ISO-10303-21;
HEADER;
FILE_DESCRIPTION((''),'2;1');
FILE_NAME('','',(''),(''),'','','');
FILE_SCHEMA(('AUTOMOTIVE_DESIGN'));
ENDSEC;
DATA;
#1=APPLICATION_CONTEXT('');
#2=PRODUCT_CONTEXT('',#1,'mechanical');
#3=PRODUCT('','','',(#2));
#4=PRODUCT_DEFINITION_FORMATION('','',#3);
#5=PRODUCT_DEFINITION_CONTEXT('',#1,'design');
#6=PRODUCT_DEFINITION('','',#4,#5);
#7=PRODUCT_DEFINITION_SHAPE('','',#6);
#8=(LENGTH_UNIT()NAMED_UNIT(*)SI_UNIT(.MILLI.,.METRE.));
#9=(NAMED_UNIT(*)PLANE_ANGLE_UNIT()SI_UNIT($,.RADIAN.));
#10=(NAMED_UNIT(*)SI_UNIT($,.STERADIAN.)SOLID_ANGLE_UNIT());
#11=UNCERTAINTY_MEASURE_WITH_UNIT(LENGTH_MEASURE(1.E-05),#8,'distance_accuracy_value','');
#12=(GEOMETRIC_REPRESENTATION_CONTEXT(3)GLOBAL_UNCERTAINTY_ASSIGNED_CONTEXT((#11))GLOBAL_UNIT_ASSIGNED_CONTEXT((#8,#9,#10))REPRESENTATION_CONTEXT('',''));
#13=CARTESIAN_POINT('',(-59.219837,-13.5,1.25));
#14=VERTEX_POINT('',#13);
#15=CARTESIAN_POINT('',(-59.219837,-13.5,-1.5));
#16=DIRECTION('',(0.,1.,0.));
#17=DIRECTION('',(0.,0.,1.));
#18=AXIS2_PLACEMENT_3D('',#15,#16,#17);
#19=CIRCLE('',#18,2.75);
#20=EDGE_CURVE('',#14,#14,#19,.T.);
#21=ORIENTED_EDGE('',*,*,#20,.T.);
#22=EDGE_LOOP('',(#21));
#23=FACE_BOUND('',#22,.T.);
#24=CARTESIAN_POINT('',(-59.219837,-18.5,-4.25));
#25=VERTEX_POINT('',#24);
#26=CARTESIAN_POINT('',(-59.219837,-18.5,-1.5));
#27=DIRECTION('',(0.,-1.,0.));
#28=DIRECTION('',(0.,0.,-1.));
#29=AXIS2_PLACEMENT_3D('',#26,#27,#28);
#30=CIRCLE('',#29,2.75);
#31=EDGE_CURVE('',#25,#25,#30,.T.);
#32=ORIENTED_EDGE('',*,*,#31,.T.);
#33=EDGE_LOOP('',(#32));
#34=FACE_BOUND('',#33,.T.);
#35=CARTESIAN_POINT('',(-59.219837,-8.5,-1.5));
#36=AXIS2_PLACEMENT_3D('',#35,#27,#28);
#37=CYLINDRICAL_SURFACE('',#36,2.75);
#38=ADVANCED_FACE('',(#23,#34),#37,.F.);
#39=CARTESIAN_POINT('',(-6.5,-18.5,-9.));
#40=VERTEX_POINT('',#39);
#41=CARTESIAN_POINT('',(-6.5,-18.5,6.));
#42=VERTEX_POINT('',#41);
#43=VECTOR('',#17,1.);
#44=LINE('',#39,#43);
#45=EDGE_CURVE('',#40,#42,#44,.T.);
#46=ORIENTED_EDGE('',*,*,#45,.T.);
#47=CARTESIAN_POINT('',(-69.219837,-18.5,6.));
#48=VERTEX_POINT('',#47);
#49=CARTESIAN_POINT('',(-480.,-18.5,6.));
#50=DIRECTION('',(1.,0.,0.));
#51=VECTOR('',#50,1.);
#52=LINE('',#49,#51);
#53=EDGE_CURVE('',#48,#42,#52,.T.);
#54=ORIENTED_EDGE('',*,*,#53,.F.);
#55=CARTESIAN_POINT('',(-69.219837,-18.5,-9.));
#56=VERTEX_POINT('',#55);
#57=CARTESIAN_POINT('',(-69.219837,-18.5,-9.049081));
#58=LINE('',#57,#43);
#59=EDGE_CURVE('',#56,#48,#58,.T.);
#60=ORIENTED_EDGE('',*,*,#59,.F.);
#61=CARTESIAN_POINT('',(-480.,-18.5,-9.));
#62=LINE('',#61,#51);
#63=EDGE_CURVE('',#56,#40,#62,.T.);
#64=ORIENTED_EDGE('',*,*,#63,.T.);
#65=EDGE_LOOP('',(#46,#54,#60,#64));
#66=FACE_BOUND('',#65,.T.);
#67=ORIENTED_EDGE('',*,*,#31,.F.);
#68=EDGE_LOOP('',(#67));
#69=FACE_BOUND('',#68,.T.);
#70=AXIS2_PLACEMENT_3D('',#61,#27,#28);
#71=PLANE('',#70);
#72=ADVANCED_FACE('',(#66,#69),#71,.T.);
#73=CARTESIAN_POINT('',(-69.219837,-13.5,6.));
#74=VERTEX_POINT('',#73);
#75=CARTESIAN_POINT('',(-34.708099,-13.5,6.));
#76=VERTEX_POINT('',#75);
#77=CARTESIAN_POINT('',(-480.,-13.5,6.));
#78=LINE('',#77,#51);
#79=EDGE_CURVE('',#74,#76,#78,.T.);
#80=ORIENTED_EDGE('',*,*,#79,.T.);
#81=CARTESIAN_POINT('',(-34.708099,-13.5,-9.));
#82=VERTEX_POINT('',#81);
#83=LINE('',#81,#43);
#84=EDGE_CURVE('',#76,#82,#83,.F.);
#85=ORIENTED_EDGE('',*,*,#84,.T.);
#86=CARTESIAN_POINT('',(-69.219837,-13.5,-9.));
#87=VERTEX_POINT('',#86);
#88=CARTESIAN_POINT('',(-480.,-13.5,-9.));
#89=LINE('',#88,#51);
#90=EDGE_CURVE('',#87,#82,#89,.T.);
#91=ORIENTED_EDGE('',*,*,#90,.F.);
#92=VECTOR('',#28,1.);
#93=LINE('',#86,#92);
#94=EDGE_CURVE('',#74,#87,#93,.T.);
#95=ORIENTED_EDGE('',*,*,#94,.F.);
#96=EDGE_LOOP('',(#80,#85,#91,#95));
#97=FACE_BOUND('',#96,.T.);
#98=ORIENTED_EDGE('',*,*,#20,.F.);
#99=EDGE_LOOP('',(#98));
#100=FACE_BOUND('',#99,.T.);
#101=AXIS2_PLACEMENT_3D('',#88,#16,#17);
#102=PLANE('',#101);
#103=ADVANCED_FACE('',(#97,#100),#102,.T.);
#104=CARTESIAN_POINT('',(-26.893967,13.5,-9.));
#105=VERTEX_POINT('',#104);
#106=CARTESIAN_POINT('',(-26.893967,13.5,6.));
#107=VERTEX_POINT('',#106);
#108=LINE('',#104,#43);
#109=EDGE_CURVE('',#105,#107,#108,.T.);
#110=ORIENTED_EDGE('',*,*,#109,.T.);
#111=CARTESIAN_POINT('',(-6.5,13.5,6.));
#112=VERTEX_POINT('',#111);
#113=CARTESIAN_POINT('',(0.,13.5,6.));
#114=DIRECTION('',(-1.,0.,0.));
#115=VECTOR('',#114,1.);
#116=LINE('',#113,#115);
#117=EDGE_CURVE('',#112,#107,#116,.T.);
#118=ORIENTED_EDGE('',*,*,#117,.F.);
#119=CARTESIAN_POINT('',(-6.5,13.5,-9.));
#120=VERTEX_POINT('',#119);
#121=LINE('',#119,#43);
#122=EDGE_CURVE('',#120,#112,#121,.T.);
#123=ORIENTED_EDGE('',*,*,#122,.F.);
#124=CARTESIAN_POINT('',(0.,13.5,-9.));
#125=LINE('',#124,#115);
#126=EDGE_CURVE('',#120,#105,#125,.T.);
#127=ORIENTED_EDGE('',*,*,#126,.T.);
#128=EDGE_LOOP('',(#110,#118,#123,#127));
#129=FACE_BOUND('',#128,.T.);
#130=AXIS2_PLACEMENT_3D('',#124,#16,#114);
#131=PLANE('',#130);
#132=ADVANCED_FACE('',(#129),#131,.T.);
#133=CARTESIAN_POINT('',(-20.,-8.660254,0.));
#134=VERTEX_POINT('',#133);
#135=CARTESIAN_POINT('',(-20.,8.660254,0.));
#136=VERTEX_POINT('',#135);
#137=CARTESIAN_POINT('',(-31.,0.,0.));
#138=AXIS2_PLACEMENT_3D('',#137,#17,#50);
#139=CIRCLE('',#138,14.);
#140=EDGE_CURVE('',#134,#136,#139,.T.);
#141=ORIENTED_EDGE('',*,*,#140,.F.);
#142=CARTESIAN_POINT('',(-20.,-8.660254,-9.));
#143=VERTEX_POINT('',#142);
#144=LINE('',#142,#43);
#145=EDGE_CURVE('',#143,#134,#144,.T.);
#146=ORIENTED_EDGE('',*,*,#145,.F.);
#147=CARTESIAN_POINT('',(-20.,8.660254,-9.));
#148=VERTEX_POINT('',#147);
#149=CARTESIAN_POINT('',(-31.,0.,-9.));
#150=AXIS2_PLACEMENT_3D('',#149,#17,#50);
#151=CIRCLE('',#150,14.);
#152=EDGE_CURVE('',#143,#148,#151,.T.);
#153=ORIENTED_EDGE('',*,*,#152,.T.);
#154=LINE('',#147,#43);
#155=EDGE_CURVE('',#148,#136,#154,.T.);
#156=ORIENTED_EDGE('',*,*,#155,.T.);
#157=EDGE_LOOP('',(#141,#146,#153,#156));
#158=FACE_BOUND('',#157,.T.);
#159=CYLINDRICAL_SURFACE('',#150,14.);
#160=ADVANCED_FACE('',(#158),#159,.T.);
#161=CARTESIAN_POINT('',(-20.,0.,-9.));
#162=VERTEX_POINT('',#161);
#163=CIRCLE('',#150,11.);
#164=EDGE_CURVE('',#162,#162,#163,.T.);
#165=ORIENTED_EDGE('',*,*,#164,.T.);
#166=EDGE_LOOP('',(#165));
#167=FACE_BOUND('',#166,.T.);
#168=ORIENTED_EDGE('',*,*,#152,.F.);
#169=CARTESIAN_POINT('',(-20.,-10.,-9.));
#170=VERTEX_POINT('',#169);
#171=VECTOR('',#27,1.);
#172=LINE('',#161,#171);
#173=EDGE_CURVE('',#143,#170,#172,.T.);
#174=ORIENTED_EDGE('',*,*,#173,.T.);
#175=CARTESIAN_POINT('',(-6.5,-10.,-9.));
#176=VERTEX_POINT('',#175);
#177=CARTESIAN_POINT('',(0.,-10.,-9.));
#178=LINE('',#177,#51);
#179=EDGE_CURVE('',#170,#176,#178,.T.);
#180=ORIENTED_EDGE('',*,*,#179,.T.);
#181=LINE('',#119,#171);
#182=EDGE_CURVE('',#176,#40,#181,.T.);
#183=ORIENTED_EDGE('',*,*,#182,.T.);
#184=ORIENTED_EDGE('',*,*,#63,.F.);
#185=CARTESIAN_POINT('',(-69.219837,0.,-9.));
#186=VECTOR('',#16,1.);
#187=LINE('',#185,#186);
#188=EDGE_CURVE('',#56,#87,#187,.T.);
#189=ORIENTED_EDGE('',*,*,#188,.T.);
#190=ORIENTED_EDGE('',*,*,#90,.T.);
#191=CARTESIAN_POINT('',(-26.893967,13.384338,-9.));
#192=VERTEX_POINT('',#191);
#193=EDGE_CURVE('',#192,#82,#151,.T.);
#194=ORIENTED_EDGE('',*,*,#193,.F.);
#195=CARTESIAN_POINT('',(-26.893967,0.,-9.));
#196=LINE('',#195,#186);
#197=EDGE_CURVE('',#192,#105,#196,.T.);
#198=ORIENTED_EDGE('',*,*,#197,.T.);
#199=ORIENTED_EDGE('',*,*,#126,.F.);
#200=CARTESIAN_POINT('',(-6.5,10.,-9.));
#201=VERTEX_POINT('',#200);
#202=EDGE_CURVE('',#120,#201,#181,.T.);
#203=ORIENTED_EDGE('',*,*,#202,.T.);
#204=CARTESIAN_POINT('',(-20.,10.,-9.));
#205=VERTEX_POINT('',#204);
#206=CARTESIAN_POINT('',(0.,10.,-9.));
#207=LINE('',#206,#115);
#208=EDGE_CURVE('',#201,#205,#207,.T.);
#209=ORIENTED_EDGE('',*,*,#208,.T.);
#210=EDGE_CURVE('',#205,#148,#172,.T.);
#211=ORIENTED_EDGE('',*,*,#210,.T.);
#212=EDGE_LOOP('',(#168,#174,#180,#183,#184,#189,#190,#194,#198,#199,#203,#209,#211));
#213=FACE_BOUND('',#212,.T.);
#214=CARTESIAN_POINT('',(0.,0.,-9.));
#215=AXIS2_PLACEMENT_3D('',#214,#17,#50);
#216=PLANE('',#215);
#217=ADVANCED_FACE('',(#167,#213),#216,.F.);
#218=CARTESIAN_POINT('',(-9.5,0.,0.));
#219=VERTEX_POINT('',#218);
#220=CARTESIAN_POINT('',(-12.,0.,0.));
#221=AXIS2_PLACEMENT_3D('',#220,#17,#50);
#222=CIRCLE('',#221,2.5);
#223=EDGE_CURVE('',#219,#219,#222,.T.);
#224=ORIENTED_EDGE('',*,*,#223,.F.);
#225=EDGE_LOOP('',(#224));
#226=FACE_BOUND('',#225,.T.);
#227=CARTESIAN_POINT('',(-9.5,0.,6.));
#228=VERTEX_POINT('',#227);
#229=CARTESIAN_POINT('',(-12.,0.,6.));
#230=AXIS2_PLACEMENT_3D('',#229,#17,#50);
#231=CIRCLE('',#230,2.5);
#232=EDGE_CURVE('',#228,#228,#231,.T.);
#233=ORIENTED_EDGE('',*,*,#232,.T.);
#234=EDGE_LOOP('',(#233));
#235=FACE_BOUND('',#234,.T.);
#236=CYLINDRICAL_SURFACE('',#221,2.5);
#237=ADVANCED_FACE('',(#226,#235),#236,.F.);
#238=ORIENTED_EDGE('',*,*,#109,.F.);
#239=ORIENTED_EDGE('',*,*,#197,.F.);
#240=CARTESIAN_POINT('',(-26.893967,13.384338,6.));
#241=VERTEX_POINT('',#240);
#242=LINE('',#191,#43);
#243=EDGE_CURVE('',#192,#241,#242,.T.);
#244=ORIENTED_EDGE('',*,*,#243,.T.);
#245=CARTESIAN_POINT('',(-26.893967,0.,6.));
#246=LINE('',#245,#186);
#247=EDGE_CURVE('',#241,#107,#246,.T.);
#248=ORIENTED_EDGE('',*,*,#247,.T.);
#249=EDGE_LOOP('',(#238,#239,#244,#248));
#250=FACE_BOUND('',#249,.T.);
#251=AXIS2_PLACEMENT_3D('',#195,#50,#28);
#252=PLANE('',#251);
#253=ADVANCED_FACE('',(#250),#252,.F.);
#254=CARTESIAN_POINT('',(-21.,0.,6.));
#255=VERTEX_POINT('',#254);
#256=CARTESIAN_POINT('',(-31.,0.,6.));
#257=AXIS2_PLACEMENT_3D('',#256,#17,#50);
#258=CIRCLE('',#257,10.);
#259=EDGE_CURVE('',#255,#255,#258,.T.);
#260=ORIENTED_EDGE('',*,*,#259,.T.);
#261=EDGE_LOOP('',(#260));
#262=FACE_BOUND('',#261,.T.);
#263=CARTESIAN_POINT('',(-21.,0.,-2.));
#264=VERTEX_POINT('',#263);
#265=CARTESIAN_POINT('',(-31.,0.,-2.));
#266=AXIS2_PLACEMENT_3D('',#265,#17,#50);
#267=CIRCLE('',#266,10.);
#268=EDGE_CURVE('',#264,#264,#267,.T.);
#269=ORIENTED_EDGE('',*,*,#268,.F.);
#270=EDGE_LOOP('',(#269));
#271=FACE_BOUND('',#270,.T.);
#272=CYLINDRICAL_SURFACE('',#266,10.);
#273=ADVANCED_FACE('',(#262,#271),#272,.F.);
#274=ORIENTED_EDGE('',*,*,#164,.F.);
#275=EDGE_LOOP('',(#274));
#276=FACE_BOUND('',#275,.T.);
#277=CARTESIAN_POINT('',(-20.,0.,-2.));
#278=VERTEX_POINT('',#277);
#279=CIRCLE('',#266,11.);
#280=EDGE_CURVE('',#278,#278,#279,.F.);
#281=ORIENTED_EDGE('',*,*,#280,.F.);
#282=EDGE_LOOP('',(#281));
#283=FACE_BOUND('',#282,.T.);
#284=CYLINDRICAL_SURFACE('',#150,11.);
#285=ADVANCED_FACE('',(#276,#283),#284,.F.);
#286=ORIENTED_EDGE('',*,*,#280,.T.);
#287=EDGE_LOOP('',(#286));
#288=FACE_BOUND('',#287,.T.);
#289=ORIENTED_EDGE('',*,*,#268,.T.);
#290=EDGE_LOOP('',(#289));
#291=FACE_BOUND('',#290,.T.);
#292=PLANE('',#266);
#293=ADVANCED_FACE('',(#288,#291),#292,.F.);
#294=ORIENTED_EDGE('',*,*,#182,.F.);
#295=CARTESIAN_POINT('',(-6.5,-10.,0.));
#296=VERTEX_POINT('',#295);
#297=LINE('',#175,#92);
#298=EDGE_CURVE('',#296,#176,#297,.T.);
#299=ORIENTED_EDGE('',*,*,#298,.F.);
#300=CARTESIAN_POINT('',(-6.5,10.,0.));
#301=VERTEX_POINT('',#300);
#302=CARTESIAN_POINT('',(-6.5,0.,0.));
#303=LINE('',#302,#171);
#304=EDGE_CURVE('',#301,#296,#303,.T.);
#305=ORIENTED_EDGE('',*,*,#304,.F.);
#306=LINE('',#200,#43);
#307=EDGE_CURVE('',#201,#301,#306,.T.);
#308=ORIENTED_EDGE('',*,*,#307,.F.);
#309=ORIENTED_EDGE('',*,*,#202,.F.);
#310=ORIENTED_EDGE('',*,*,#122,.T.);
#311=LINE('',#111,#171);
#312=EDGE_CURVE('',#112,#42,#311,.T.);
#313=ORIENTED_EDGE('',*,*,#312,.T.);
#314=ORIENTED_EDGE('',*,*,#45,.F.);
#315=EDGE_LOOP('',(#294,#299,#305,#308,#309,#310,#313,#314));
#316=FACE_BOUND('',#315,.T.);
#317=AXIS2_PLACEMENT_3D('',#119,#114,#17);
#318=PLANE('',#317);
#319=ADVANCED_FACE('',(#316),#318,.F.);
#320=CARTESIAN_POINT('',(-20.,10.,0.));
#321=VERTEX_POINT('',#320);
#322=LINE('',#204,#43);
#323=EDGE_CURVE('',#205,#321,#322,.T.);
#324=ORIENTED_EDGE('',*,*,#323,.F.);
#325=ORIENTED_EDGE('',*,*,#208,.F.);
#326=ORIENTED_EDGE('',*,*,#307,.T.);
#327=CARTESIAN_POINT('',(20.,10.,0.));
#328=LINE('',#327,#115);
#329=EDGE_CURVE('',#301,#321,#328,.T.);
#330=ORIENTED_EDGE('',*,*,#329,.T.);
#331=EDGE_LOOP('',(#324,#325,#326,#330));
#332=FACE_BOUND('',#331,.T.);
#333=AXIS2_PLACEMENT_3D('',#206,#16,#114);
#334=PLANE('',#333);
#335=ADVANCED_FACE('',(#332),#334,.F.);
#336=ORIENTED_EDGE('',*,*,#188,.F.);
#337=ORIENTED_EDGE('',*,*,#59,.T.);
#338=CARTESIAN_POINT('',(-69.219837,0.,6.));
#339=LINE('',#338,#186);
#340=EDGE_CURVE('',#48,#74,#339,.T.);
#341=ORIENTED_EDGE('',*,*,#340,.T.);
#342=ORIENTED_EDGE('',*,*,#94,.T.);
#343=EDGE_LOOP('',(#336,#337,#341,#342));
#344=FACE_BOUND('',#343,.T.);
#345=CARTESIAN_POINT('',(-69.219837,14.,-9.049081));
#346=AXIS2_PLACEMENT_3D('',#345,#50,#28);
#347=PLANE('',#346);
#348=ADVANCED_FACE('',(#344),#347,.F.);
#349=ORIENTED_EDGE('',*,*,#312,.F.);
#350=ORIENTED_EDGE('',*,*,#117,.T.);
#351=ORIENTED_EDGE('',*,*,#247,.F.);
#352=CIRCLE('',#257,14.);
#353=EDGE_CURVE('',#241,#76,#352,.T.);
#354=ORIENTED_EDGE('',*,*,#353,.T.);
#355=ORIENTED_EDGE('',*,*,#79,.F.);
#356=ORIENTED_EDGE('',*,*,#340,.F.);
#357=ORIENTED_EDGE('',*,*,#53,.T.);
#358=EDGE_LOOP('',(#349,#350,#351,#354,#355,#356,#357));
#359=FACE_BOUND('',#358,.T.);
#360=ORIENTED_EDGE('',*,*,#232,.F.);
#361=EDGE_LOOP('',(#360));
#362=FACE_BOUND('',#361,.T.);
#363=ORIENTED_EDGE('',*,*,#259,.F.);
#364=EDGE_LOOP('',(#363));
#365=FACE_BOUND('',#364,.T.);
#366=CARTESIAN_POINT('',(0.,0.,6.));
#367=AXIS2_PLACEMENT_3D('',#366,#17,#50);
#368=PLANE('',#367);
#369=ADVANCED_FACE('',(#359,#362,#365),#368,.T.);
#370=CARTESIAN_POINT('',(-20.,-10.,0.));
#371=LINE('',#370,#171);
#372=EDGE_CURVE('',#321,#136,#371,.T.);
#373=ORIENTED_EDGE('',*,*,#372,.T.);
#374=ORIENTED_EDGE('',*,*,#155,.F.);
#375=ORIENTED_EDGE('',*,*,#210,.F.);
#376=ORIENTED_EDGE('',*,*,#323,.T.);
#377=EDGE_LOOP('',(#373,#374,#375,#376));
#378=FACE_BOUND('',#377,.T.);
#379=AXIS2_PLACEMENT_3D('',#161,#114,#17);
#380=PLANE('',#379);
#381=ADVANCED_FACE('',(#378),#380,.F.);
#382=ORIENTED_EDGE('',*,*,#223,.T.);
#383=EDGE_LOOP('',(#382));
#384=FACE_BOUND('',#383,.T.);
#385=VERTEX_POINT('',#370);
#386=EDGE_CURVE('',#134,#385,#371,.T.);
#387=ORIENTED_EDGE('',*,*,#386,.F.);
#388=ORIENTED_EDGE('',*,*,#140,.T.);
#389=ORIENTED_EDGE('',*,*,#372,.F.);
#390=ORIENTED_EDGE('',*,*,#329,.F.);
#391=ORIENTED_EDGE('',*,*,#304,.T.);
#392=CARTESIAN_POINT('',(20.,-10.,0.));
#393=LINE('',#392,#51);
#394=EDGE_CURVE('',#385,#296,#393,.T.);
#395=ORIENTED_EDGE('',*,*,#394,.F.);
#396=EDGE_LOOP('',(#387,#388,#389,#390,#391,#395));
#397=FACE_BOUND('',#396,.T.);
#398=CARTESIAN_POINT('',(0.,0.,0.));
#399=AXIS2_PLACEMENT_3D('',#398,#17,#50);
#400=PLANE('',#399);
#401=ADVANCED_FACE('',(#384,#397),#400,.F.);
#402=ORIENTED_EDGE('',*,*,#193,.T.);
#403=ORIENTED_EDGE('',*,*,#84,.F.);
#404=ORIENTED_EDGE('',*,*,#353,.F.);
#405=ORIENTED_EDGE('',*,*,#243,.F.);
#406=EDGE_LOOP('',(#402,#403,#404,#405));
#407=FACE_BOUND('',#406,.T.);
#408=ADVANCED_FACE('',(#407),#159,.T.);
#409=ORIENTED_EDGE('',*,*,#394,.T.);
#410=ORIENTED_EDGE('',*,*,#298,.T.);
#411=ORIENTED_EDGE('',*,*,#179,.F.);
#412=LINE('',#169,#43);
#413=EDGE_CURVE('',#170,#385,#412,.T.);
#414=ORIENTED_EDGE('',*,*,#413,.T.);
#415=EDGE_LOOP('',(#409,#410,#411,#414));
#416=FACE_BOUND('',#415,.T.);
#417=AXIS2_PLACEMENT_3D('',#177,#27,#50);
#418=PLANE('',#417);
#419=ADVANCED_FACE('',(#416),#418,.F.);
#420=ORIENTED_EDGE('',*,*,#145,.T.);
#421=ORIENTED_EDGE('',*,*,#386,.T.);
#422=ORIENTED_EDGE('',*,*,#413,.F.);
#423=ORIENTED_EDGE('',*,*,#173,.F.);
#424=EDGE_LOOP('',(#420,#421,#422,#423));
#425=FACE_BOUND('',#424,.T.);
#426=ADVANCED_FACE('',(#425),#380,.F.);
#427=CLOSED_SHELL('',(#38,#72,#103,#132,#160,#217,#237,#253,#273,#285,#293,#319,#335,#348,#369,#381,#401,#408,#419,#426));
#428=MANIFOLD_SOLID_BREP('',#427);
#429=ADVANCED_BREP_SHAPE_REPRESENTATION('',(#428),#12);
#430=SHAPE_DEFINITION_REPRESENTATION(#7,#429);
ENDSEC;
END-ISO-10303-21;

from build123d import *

# Parameters (mm, degrees)
SKETCH_1_W          = 40
SKETCH_1_H          = 20
EXTRUDE_1_DEPTH     = 6
SKETCH_2_R          = 2.5
CUT_EXTRUDE_1_DEPTH = 24.151673806
EXTRUDE_START       = -15
EXTRUDE_2_OUTLINE_R = 11
EXTRUDE_2_DEPTH     = 15
EXTRUDE_START_2     = -8
SKETCH_5_R          = 11
SKETCH_5_R_2        = 10
EXTRUDE_3_DEPTH     = 8
SKETCH_10_W         = 15
SKETCH_10_H         = 5
EXTRUDE_4_DEPTH     = 500
SKETCH_11_W         = 11.491200589
SKETCH_11_H         = 5.122583395
EXTRUDE_5_DEPTH     = 15
SKETCH_12_W         = 26.5
SKETCH_12_H         = 32
CUT_EXTRUDE_2_DEPTH = 481.59052217
SKETCH_14_W         = 424.807672393
SKETCH_14_H         = 21.861471412
CUT_EXTRUDE_3_DEPTH = 482.183177179
SKETCH_15_R         = 2.75
CUT_EXTRUDE_4_DEPTH = 10


# Read off the part's stored shape, not the designer's step: 凸台-拉伸2
with BuildPart() as part:
    # 草图1 → 凸台-拉伸1 (new body)
    with BuildSketch(Plane.XY):
        Rectangle(SKETCH_1_W, SKETCH_1_H)
    extrude(amount=EXTRUDE_1_DEPTH)

    # 草图2 → 切除-拉伸1 (cut, through all)
    with BuildSketch(Plane.XY.offset(6)):
        with Locations((10, 0)):
            Circle(SKETCH_2_R)
        with Locations((-1, 0)):
            Circle(SKETCH_2_R)
        with Locations((-12, 0)):
            Circle(SKETCH_2_R)
    extrude(amount=-CUT_EXTRUDE_1_DEPTH, mode=Mode.SUBTRACT)

    # 凸台-拉伸2 outline → 凸台-拉伸2 (add)
    with BuildSketch(Plane.XY.offset(6).offset(EXTRUDE_START)):
        with BuildLine():
            Line((20, 10), (20, 13.5))
            Line((20, 13.5), (-26.893967141, 13.5))
            Line((-26.893967141, 13.5), (-26.893967141, 13.384337644))
            ThreePointArc((-26.893967141, 13.384337644), (-45, 0), (-26.893967141, -13.384337644))
            Line((-26.893967141, -13.384337644), (-26.893967141, -13.5))
            Line((-26.893967141, -13.5), (20, -13.5))
            Line((20, -13.5), (20, -10))
            Line((20, -10), (-20, -10))
            Line((-20, -10), (-20, -8.660254038))
            ThreePointArc((-20, -8.660254038), (-17, 0), (-20, 8.660254038))
            Line((-20, 8.660254038), (-20, 10))
            Line((-20, 10), (20, 10))
        make_face()
        with Locations((-31, 0)):
            Circle(EXTRUDE_2_OUTLINE_R, mode=Mode.SUBTRACT)
    extrude(amount=EXTRUDE_2_DEPTH)

    # 草图5 → 凸台-拉伸3 (add)
    with BuildSketch(Plane.XY.offset(6).offset(EXTRUDE_START_2)):
        with Locations((-31, 0)):
            Circle(SKETCH_5_R)
        with Locations((-31, 0)):
            Circle(SKETCH_5_R_2, mode=Mode.SUBTRACT)
    extrude(amount=EXTRUDE_3_DEPTH)

    # 草图10 → 凸台-拉伸4 (add)
    with BuildSketch(Plane(origin=(20, 0, 0), x_dir=(0, 0, -1), z_dir=(1, 0, 0))):
        with Locations((1.5, -16)):
            Rectangle(SKETCH_10_W, SKETCH_10_H)
    extrude(amount=-EXTRUDE_4_DEPTH)

    # 草图11 → 凸台-拉伸5 (add, through all)
    with BuildSketch(Plane(origin=(0, 0, -9), x_dir=(-1, 0, 0), z_dir=(0, 0, -1))):
        with Locations((27.78271332, -13.925059853)):
            Rectangle(SKETCH_11_W, SKETCH_11_H)
    extrude(amount=-EXTRUDE_5_DEPTH)

    # 草图12 → 切除-拉伸2 (cut, through all)
    with BuildSketch(Plane.XY.offset(6)):
        with Locations((6.75, -2.5)):
            Rectangle(SKETCH_12_W, SKETCH_12_H)
    extrude(amount=-CUT_EXTRUDE_2_DEPTH, mode=Mode.SUBTRACT)

    # 草图14 → 切除-拉伸3 (cut, through all)
    with BuildSketch(Plane.XZ.offset(18.5)):
        with Locations((-281.623673677, 1.881654976)):
            Rectangle(SKETCH_14_W, SKETCH_14_H)
    extrude(amount=-CUT_EXTRUDE_3_DEPTH, mode=Mode.SUBTRACT)

    # 草图15 → 切除-拉伸4 (cut)
    with BuildSketch(Plane.XZ.offset(18.5)):
        with Locations(Location((-59.219837481, -1.5, 0), (0, 0, 270))):
            Circle(SKETCH_15_R)
    extrude(amount=-CUT_EXTRUDE_4_DEPTH, mode=Mode.SUBTRACT)


solid = part.part
